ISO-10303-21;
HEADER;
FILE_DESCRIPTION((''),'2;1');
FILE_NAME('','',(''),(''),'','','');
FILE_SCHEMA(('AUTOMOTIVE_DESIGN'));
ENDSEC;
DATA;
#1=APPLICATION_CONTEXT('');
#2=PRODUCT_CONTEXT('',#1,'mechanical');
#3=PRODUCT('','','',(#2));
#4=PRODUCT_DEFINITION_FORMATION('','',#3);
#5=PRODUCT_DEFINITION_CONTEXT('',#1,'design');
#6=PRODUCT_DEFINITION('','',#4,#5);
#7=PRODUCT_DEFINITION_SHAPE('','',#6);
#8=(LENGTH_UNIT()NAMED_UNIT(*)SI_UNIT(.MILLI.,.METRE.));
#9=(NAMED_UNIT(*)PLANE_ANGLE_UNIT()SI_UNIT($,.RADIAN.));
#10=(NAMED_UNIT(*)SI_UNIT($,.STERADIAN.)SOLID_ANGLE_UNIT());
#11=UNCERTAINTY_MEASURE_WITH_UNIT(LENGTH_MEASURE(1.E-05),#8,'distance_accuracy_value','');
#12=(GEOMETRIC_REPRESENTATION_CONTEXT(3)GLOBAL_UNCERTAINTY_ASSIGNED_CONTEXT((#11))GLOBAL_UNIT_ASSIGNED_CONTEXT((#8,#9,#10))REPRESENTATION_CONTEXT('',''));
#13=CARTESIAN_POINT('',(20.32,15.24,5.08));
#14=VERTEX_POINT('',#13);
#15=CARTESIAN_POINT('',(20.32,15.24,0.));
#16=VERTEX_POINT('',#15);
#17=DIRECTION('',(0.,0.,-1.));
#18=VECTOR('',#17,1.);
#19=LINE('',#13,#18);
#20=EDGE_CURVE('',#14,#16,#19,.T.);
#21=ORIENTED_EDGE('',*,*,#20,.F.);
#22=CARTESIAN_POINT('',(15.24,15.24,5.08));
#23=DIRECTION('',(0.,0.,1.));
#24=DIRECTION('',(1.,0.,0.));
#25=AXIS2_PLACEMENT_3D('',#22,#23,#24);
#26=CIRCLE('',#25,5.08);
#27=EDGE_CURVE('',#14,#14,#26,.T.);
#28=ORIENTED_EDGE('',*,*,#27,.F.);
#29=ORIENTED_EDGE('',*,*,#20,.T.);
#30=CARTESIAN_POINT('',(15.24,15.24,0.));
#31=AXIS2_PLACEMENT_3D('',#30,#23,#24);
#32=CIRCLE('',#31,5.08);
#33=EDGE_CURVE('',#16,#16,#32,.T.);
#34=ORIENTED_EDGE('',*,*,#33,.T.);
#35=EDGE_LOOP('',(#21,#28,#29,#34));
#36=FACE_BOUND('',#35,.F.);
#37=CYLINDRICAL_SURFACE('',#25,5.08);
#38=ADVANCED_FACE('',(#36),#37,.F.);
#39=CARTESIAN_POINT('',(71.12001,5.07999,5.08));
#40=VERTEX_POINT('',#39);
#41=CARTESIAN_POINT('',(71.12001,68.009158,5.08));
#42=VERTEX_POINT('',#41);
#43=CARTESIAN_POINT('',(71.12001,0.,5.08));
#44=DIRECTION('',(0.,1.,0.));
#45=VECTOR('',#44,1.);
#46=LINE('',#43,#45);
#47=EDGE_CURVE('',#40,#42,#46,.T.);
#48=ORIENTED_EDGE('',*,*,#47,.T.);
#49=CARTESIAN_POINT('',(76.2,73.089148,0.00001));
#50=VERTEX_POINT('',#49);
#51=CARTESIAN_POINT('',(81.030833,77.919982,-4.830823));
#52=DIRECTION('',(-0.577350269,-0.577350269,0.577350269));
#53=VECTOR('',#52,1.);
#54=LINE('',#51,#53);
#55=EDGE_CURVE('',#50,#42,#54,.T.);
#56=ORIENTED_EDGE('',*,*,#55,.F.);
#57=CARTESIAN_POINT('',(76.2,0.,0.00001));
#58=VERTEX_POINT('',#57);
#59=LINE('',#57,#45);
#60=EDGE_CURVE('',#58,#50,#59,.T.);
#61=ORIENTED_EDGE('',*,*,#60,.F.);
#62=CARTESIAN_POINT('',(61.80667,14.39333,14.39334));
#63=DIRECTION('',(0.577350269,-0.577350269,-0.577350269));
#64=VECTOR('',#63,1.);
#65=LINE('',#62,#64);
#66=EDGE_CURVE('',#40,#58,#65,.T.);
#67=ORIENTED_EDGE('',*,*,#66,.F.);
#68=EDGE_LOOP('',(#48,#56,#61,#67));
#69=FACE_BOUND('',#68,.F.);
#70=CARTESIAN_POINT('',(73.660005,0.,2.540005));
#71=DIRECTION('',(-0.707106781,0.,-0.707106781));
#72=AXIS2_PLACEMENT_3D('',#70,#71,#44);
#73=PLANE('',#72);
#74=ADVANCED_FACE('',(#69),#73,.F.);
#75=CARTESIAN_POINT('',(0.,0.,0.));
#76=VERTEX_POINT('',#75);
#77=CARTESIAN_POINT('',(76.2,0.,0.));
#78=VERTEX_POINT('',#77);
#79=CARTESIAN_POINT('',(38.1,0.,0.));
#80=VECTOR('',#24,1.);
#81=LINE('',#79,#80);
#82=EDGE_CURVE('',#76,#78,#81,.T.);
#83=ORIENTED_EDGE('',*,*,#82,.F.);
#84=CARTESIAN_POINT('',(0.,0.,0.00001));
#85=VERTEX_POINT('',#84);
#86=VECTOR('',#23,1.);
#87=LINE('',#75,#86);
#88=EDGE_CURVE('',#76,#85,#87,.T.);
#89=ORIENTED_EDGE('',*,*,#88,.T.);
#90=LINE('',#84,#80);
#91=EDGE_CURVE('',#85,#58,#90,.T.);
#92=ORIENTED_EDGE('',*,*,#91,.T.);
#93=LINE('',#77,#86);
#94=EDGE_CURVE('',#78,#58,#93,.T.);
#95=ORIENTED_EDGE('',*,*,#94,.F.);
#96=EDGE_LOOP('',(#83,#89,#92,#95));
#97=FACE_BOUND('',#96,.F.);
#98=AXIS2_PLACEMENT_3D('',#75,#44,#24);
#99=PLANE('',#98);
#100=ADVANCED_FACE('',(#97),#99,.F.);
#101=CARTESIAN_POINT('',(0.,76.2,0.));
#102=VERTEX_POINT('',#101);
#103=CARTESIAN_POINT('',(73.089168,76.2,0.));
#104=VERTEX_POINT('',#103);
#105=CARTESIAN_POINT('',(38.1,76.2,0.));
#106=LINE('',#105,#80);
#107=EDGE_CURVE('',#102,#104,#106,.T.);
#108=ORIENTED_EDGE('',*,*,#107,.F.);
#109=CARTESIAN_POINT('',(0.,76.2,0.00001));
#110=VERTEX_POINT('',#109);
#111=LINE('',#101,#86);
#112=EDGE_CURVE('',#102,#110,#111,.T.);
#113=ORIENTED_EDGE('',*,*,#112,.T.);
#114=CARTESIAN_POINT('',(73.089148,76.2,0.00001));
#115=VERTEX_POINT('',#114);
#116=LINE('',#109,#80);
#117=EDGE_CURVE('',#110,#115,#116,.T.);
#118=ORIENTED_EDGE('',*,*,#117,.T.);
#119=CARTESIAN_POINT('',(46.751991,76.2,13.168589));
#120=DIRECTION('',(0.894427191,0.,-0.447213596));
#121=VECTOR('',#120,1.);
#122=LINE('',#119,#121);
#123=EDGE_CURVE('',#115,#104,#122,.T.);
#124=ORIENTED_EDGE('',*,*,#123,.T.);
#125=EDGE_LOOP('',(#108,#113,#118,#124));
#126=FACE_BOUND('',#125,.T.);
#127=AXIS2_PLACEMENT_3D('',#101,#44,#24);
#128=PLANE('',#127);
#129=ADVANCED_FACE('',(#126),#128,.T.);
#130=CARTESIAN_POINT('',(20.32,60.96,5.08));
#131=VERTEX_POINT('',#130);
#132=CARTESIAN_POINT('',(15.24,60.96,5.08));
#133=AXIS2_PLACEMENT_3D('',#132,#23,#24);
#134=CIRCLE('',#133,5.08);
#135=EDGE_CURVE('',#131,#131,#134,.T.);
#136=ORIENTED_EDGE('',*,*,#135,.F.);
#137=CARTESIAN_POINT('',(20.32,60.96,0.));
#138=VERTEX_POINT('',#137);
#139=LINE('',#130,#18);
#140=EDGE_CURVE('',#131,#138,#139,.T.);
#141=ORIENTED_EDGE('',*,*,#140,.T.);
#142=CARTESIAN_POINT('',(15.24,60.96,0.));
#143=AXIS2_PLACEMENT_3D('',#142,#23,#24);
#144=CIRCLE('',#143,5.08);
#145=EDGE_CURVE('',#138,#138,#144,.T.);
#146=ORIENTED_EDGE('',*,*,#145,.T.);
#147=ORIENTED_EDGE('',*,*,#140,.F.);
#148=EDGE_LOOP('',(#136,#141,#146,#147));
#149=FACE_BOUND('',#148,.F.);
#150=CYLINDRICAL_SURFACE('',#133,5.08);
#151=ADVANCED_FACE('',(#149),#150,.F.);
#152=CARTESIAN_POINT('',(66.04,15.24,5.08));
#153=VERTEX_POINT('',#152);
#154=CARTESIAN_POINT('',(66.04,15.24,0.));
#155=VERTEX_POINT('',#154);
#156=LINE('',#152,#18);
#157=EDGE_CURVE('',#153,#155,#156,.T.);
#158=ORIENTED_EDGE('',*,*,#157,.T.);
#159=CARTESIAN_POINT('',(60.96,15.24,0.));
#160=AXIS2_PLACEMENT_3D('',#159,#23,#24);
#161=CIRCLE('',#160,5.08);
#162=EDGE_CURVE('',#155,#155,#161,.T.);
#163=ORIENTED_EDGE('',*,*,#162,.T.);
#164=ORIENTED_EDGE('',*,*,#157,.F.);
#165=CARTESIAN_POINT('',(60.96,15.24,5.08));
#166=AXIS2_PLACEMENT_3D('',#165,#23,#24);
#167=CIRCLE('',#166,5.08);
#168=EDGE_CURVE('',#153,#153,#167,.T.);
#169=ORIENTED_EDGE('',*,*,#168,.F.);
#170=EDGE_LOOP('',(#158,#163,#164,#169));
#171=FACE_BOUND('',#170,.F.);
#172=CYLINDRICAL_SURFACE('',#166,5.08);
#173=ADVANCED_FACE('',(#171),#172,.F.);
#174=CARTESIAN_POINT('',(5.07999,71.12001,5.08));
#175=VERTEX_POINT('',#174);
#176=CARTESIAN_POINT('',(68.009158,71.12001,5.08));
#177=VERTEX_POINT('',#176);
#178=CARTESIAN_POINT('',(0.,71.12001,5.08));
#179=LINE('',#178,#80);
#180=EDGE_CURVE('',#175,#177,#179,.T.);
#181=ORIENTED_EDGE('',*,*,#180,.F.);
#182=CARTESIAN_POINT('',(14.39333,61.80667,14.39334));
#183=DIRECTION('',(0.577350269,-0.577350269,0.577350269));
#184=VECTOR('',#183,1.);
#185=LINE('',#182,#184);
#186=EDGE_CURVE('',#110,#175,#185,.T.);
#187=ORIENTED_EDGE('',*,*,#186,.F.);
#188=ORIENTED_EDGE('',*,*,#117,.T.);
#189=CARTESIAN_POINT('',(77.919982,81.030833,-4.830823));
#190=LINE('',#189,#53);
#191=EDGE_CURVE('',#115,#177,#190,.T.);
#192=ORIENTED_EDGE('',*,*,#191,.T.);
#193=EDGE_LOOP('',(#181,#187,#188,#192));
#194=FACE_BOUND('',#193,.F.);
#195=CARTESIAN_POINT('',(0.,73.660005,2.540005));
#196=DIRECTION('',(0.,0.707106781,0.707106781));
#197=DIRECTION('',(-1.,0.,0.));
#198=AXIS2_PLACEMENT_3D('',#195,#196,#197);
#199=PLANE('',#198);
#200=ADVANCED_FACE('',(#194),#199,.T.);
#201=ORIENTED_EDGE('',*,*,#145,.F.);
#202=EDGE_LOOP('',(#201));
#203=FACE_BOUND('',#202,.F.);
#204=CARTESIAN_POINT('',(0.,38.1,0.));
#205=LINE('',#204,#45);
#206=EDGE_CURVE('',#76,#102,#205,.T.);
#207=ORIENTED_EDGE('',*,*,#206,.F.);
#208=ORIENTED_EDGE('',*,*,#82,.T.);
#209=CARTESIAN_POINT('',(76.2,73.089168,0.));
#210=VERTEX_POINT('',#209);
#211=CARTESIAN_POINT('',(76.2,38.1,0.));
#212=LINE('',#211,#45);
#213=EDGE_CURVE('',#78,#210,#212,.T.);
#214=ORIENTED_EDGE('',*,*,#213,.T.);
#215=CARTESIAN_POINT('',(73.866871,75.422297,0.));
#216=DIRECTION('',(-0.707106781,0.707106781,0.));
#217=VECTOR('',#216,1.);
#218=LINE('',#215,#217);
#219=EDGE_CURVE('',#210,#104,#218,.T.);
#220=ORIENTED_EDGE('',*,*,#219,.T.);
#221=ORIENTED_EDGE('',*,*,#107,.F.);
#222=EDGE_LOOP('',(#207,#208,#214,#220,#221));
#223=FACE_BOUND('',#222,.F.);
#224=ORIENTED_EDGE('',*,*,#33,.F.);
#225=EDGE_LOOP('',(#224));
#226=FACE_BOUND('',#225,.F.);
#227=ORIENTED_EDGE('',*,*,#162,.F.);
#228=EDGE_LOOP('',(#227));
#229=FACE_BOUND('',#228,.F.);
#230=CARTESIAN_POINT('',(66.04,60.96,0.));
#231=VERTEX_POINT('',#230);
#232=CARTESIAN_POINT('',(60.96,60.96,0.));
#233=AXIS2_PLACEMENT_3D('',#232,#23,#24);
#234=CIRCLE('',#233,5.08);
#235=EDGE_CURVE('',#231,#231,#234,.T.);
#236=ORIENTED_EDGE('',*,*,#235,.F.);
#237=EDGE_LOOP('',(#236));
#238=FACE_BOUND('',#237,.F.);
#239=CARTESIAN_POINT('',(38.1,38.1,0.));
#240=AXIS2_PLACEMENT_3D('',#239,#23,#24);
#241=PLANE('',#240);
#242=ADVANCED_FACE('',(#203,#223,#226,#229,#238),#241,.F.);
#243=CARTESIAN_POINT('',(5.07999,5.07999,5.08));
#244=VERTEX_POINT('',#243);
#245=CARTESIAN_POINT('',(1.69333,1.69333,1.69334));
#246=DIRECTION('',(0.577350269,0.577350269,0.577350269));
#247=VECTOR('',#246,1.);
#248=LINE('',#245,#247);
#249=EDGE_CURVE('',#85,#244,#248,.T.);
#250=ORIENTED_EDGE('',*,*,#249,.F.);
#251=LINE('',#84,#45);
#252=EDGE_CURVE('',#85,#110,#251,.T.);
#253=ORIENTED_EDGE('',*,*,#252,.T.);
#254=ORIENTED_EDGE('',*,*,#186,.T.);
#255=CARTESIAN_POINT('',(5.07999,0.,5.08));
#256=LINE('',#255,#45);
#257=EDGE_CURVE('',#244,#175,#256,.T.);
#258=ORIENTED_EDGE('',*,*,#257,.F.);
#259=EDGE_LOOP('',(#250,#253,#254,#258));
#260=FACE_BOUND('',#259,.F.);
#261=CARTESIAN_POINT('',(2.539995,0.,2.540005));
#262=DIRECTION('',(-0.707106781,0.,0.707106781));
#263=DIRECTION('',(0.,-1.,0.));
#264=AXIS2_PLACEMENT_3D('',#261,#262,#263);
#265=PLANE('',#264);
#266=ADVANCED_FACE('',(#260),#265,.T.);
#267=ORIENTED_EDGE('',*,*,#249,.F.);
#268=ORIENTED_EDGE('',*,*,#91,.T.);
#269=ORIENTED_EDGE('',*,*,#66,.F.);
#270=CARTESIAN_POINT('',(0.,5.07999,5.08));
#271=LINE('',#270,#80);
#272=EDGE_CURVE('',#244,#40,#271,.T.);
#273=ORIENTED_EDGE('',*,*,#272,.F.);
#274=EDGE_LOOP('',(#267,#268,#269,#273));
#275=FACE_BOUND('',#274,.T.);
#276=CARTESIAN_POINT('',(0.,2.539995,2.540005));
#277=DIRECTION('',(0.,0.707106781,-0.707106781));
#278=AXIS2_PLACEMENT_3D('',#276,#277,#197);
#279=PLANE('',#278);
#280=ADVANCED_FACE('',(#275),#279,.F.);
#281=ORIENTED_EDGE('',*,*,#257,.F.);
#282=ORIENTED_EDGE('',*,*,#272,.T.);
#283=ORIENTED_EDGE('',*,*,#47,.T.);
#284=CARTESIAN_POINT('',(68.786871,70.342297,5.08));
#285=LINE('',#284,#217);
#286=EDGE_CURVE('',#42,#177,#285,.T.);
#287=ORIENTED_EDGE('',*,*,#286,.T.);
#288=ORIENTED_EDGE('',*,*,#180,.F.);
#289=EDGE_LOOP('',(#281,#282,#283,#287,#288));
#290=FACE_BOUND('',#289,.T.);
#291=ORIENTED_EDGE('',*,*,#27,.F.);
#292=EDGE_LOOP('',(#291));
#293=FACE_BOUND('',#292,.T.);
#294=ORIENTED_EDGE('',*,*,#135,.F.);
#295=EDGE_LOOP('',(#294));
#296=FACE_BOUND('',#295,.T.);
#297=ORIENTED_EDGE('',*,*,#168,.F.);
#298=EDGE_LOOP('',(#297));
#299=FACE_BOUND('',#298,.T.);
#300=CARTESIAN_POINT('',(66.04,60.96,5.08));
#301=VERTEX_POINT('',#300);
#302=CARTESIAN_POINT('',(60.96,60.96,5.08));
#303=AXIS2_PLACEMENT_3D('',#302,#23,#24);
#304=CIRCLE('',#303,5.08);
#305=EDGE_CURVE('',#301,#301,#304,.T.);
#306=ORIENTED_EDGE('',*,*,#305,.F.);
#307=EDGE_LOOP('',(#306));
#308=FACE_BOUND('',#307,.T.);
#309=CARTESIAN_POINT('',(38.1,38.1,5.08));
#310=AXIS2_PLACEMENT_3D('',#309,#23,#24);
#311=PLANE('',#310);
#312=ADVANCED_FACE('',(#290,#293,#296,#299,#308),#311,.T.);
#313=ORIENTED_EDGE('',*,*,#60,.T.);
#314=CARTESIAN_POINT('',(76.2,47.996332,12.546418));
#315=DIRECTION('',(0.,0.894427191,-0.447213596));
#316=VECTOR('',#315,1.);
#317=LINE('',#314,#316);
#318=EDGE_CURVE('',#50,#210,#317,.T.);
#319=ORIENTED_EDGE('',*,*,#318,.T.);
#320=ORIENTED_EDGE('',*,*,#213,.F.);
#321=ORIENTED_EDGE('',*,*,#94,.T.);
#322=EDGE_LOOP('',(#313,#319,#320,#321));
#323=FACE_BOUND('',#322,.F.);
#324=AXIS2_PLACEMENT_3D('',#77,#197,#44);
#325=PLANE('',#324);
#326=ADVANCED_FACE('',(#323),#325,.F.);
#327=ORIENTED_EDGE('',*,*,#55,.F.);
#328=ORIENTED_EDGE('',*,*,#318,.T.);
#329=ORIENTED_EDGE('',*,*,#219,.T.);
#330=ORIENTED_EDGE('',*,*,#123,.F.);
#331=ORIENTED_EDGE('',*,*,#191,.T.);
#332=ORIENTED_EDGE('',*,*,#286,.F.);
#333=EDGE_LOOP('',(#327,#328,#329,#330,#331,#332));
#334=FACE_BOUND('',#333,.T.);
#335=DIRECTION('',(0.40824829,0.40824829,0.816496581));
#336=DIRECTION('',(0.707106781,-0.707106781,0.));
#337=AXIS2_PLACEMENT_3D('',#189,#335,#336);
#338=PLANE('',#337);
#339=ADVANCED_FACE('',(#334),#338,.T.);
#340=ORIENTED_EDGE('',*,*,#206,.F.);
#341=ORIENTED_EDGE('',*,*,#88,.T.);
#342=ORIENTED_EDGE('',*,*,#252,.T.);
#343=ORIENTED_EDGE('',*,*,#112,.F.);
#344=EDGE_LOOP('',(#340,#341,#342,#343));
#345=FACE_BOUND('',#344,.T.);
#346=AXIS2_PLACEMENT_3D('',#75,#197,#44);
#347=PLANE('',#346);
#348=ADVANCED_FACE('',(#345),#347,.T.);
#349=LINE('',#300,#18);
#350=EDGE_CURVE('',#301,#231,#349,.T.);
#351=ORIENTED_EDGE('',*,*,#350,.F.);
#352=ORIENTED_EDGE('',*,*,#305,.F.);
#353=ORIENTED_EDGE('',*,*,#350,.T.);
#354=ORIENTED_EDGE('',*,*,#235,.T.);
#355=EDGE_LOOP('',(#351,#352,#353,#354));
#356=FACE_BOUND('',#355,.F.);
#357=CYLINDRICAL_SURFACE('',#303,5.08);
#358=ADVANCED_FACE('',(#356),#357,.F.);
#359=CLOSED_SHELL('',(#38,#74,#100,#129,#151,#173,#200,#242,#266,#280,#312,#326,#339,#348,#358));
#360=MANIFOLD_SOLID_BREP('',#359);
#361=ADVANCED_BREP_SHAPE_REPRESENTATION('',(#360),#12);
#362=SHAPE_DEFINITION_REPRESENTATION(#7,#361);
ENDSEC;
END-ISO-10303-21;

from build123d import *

# Parameters (mm, degrees)
F0_W        = 76.2
F0_H        = 76.2
F1_DEPTH    = 5.08
F2_R        = 5.08
F3_DEPTH    = 25.4
F4_SIZE     = 5.07999
F5_T1_DEPTH = 21.9411964155


# Not quite as in the source:
# - a fillet or chamfer that OpenCascade refuses, or shapes differently, is made with other operations: its cross-section is extruded or revolved along the edge and cut away or added
# - a fillet or chamfer is up to 0.001 mm smaller than in the source, because OpenCascade refuses the exact size


with BuildPart() as f1:
    # F0 (on Top) → F1 (new body)
    with BuildSketch(Plane.XY):
        with Locations((38.1, 38.1)):
            Rectangle(F0_W, F0_H)
    extrude(amount=F1_DEPTH)

    # F2 (on face) → F3 (cut)
    with BuildSketch(Plane.XY.offset(5.08)):
        with Locations((15.24, 60.96)):
            Circle(F2_R)
        with Locations((60.96, 60.96)):
            Circle(F2_R)
        with Locations((15.24, 15.24)):
            Circle(F2_R)
        with Locations((60.96, 15.24)):
            Circle(F2_R)
    extrude(amount=-F3_DEPTH, mode=Mode.SUBTRACT)

    # F4 (size 5.08 in the source; OpenCascade refuses exactly that, so slightly less here)
    f4_edges = [f1.edges().sort_by_distance(p)[0] for p in [
        (38.1, 76.2, 5.08),
        (0, 38.1, 5.08),
        (76.2, 38.1, 5.08),
        (38.1, 0, 5.08),
    ]]
    chamfer(f4_edges, length=F4_SIZE)

    # F5: chamfer of 2.54 on 1 edges, made by hand

    # F5_s2 → F5_t1 (cut)
    with BuildSketch(Plane(origin=(54.5938794951, 54.5938794951, -54.5938794951), x_dir=(0.7071067812, -0.7071067812, 0), z_dir=(-0.5773502692, -0.5773502692, 0.5773502692))):
        Polygon((-2.1997045256, 60.9470476317), (2.1997045256, 60.9470476317), (0, 62.2170476317), align=None)
    extrude(amount=F5_T1_DEPTH, mode=Mode.SUBTRACT)


solid = f1.part
